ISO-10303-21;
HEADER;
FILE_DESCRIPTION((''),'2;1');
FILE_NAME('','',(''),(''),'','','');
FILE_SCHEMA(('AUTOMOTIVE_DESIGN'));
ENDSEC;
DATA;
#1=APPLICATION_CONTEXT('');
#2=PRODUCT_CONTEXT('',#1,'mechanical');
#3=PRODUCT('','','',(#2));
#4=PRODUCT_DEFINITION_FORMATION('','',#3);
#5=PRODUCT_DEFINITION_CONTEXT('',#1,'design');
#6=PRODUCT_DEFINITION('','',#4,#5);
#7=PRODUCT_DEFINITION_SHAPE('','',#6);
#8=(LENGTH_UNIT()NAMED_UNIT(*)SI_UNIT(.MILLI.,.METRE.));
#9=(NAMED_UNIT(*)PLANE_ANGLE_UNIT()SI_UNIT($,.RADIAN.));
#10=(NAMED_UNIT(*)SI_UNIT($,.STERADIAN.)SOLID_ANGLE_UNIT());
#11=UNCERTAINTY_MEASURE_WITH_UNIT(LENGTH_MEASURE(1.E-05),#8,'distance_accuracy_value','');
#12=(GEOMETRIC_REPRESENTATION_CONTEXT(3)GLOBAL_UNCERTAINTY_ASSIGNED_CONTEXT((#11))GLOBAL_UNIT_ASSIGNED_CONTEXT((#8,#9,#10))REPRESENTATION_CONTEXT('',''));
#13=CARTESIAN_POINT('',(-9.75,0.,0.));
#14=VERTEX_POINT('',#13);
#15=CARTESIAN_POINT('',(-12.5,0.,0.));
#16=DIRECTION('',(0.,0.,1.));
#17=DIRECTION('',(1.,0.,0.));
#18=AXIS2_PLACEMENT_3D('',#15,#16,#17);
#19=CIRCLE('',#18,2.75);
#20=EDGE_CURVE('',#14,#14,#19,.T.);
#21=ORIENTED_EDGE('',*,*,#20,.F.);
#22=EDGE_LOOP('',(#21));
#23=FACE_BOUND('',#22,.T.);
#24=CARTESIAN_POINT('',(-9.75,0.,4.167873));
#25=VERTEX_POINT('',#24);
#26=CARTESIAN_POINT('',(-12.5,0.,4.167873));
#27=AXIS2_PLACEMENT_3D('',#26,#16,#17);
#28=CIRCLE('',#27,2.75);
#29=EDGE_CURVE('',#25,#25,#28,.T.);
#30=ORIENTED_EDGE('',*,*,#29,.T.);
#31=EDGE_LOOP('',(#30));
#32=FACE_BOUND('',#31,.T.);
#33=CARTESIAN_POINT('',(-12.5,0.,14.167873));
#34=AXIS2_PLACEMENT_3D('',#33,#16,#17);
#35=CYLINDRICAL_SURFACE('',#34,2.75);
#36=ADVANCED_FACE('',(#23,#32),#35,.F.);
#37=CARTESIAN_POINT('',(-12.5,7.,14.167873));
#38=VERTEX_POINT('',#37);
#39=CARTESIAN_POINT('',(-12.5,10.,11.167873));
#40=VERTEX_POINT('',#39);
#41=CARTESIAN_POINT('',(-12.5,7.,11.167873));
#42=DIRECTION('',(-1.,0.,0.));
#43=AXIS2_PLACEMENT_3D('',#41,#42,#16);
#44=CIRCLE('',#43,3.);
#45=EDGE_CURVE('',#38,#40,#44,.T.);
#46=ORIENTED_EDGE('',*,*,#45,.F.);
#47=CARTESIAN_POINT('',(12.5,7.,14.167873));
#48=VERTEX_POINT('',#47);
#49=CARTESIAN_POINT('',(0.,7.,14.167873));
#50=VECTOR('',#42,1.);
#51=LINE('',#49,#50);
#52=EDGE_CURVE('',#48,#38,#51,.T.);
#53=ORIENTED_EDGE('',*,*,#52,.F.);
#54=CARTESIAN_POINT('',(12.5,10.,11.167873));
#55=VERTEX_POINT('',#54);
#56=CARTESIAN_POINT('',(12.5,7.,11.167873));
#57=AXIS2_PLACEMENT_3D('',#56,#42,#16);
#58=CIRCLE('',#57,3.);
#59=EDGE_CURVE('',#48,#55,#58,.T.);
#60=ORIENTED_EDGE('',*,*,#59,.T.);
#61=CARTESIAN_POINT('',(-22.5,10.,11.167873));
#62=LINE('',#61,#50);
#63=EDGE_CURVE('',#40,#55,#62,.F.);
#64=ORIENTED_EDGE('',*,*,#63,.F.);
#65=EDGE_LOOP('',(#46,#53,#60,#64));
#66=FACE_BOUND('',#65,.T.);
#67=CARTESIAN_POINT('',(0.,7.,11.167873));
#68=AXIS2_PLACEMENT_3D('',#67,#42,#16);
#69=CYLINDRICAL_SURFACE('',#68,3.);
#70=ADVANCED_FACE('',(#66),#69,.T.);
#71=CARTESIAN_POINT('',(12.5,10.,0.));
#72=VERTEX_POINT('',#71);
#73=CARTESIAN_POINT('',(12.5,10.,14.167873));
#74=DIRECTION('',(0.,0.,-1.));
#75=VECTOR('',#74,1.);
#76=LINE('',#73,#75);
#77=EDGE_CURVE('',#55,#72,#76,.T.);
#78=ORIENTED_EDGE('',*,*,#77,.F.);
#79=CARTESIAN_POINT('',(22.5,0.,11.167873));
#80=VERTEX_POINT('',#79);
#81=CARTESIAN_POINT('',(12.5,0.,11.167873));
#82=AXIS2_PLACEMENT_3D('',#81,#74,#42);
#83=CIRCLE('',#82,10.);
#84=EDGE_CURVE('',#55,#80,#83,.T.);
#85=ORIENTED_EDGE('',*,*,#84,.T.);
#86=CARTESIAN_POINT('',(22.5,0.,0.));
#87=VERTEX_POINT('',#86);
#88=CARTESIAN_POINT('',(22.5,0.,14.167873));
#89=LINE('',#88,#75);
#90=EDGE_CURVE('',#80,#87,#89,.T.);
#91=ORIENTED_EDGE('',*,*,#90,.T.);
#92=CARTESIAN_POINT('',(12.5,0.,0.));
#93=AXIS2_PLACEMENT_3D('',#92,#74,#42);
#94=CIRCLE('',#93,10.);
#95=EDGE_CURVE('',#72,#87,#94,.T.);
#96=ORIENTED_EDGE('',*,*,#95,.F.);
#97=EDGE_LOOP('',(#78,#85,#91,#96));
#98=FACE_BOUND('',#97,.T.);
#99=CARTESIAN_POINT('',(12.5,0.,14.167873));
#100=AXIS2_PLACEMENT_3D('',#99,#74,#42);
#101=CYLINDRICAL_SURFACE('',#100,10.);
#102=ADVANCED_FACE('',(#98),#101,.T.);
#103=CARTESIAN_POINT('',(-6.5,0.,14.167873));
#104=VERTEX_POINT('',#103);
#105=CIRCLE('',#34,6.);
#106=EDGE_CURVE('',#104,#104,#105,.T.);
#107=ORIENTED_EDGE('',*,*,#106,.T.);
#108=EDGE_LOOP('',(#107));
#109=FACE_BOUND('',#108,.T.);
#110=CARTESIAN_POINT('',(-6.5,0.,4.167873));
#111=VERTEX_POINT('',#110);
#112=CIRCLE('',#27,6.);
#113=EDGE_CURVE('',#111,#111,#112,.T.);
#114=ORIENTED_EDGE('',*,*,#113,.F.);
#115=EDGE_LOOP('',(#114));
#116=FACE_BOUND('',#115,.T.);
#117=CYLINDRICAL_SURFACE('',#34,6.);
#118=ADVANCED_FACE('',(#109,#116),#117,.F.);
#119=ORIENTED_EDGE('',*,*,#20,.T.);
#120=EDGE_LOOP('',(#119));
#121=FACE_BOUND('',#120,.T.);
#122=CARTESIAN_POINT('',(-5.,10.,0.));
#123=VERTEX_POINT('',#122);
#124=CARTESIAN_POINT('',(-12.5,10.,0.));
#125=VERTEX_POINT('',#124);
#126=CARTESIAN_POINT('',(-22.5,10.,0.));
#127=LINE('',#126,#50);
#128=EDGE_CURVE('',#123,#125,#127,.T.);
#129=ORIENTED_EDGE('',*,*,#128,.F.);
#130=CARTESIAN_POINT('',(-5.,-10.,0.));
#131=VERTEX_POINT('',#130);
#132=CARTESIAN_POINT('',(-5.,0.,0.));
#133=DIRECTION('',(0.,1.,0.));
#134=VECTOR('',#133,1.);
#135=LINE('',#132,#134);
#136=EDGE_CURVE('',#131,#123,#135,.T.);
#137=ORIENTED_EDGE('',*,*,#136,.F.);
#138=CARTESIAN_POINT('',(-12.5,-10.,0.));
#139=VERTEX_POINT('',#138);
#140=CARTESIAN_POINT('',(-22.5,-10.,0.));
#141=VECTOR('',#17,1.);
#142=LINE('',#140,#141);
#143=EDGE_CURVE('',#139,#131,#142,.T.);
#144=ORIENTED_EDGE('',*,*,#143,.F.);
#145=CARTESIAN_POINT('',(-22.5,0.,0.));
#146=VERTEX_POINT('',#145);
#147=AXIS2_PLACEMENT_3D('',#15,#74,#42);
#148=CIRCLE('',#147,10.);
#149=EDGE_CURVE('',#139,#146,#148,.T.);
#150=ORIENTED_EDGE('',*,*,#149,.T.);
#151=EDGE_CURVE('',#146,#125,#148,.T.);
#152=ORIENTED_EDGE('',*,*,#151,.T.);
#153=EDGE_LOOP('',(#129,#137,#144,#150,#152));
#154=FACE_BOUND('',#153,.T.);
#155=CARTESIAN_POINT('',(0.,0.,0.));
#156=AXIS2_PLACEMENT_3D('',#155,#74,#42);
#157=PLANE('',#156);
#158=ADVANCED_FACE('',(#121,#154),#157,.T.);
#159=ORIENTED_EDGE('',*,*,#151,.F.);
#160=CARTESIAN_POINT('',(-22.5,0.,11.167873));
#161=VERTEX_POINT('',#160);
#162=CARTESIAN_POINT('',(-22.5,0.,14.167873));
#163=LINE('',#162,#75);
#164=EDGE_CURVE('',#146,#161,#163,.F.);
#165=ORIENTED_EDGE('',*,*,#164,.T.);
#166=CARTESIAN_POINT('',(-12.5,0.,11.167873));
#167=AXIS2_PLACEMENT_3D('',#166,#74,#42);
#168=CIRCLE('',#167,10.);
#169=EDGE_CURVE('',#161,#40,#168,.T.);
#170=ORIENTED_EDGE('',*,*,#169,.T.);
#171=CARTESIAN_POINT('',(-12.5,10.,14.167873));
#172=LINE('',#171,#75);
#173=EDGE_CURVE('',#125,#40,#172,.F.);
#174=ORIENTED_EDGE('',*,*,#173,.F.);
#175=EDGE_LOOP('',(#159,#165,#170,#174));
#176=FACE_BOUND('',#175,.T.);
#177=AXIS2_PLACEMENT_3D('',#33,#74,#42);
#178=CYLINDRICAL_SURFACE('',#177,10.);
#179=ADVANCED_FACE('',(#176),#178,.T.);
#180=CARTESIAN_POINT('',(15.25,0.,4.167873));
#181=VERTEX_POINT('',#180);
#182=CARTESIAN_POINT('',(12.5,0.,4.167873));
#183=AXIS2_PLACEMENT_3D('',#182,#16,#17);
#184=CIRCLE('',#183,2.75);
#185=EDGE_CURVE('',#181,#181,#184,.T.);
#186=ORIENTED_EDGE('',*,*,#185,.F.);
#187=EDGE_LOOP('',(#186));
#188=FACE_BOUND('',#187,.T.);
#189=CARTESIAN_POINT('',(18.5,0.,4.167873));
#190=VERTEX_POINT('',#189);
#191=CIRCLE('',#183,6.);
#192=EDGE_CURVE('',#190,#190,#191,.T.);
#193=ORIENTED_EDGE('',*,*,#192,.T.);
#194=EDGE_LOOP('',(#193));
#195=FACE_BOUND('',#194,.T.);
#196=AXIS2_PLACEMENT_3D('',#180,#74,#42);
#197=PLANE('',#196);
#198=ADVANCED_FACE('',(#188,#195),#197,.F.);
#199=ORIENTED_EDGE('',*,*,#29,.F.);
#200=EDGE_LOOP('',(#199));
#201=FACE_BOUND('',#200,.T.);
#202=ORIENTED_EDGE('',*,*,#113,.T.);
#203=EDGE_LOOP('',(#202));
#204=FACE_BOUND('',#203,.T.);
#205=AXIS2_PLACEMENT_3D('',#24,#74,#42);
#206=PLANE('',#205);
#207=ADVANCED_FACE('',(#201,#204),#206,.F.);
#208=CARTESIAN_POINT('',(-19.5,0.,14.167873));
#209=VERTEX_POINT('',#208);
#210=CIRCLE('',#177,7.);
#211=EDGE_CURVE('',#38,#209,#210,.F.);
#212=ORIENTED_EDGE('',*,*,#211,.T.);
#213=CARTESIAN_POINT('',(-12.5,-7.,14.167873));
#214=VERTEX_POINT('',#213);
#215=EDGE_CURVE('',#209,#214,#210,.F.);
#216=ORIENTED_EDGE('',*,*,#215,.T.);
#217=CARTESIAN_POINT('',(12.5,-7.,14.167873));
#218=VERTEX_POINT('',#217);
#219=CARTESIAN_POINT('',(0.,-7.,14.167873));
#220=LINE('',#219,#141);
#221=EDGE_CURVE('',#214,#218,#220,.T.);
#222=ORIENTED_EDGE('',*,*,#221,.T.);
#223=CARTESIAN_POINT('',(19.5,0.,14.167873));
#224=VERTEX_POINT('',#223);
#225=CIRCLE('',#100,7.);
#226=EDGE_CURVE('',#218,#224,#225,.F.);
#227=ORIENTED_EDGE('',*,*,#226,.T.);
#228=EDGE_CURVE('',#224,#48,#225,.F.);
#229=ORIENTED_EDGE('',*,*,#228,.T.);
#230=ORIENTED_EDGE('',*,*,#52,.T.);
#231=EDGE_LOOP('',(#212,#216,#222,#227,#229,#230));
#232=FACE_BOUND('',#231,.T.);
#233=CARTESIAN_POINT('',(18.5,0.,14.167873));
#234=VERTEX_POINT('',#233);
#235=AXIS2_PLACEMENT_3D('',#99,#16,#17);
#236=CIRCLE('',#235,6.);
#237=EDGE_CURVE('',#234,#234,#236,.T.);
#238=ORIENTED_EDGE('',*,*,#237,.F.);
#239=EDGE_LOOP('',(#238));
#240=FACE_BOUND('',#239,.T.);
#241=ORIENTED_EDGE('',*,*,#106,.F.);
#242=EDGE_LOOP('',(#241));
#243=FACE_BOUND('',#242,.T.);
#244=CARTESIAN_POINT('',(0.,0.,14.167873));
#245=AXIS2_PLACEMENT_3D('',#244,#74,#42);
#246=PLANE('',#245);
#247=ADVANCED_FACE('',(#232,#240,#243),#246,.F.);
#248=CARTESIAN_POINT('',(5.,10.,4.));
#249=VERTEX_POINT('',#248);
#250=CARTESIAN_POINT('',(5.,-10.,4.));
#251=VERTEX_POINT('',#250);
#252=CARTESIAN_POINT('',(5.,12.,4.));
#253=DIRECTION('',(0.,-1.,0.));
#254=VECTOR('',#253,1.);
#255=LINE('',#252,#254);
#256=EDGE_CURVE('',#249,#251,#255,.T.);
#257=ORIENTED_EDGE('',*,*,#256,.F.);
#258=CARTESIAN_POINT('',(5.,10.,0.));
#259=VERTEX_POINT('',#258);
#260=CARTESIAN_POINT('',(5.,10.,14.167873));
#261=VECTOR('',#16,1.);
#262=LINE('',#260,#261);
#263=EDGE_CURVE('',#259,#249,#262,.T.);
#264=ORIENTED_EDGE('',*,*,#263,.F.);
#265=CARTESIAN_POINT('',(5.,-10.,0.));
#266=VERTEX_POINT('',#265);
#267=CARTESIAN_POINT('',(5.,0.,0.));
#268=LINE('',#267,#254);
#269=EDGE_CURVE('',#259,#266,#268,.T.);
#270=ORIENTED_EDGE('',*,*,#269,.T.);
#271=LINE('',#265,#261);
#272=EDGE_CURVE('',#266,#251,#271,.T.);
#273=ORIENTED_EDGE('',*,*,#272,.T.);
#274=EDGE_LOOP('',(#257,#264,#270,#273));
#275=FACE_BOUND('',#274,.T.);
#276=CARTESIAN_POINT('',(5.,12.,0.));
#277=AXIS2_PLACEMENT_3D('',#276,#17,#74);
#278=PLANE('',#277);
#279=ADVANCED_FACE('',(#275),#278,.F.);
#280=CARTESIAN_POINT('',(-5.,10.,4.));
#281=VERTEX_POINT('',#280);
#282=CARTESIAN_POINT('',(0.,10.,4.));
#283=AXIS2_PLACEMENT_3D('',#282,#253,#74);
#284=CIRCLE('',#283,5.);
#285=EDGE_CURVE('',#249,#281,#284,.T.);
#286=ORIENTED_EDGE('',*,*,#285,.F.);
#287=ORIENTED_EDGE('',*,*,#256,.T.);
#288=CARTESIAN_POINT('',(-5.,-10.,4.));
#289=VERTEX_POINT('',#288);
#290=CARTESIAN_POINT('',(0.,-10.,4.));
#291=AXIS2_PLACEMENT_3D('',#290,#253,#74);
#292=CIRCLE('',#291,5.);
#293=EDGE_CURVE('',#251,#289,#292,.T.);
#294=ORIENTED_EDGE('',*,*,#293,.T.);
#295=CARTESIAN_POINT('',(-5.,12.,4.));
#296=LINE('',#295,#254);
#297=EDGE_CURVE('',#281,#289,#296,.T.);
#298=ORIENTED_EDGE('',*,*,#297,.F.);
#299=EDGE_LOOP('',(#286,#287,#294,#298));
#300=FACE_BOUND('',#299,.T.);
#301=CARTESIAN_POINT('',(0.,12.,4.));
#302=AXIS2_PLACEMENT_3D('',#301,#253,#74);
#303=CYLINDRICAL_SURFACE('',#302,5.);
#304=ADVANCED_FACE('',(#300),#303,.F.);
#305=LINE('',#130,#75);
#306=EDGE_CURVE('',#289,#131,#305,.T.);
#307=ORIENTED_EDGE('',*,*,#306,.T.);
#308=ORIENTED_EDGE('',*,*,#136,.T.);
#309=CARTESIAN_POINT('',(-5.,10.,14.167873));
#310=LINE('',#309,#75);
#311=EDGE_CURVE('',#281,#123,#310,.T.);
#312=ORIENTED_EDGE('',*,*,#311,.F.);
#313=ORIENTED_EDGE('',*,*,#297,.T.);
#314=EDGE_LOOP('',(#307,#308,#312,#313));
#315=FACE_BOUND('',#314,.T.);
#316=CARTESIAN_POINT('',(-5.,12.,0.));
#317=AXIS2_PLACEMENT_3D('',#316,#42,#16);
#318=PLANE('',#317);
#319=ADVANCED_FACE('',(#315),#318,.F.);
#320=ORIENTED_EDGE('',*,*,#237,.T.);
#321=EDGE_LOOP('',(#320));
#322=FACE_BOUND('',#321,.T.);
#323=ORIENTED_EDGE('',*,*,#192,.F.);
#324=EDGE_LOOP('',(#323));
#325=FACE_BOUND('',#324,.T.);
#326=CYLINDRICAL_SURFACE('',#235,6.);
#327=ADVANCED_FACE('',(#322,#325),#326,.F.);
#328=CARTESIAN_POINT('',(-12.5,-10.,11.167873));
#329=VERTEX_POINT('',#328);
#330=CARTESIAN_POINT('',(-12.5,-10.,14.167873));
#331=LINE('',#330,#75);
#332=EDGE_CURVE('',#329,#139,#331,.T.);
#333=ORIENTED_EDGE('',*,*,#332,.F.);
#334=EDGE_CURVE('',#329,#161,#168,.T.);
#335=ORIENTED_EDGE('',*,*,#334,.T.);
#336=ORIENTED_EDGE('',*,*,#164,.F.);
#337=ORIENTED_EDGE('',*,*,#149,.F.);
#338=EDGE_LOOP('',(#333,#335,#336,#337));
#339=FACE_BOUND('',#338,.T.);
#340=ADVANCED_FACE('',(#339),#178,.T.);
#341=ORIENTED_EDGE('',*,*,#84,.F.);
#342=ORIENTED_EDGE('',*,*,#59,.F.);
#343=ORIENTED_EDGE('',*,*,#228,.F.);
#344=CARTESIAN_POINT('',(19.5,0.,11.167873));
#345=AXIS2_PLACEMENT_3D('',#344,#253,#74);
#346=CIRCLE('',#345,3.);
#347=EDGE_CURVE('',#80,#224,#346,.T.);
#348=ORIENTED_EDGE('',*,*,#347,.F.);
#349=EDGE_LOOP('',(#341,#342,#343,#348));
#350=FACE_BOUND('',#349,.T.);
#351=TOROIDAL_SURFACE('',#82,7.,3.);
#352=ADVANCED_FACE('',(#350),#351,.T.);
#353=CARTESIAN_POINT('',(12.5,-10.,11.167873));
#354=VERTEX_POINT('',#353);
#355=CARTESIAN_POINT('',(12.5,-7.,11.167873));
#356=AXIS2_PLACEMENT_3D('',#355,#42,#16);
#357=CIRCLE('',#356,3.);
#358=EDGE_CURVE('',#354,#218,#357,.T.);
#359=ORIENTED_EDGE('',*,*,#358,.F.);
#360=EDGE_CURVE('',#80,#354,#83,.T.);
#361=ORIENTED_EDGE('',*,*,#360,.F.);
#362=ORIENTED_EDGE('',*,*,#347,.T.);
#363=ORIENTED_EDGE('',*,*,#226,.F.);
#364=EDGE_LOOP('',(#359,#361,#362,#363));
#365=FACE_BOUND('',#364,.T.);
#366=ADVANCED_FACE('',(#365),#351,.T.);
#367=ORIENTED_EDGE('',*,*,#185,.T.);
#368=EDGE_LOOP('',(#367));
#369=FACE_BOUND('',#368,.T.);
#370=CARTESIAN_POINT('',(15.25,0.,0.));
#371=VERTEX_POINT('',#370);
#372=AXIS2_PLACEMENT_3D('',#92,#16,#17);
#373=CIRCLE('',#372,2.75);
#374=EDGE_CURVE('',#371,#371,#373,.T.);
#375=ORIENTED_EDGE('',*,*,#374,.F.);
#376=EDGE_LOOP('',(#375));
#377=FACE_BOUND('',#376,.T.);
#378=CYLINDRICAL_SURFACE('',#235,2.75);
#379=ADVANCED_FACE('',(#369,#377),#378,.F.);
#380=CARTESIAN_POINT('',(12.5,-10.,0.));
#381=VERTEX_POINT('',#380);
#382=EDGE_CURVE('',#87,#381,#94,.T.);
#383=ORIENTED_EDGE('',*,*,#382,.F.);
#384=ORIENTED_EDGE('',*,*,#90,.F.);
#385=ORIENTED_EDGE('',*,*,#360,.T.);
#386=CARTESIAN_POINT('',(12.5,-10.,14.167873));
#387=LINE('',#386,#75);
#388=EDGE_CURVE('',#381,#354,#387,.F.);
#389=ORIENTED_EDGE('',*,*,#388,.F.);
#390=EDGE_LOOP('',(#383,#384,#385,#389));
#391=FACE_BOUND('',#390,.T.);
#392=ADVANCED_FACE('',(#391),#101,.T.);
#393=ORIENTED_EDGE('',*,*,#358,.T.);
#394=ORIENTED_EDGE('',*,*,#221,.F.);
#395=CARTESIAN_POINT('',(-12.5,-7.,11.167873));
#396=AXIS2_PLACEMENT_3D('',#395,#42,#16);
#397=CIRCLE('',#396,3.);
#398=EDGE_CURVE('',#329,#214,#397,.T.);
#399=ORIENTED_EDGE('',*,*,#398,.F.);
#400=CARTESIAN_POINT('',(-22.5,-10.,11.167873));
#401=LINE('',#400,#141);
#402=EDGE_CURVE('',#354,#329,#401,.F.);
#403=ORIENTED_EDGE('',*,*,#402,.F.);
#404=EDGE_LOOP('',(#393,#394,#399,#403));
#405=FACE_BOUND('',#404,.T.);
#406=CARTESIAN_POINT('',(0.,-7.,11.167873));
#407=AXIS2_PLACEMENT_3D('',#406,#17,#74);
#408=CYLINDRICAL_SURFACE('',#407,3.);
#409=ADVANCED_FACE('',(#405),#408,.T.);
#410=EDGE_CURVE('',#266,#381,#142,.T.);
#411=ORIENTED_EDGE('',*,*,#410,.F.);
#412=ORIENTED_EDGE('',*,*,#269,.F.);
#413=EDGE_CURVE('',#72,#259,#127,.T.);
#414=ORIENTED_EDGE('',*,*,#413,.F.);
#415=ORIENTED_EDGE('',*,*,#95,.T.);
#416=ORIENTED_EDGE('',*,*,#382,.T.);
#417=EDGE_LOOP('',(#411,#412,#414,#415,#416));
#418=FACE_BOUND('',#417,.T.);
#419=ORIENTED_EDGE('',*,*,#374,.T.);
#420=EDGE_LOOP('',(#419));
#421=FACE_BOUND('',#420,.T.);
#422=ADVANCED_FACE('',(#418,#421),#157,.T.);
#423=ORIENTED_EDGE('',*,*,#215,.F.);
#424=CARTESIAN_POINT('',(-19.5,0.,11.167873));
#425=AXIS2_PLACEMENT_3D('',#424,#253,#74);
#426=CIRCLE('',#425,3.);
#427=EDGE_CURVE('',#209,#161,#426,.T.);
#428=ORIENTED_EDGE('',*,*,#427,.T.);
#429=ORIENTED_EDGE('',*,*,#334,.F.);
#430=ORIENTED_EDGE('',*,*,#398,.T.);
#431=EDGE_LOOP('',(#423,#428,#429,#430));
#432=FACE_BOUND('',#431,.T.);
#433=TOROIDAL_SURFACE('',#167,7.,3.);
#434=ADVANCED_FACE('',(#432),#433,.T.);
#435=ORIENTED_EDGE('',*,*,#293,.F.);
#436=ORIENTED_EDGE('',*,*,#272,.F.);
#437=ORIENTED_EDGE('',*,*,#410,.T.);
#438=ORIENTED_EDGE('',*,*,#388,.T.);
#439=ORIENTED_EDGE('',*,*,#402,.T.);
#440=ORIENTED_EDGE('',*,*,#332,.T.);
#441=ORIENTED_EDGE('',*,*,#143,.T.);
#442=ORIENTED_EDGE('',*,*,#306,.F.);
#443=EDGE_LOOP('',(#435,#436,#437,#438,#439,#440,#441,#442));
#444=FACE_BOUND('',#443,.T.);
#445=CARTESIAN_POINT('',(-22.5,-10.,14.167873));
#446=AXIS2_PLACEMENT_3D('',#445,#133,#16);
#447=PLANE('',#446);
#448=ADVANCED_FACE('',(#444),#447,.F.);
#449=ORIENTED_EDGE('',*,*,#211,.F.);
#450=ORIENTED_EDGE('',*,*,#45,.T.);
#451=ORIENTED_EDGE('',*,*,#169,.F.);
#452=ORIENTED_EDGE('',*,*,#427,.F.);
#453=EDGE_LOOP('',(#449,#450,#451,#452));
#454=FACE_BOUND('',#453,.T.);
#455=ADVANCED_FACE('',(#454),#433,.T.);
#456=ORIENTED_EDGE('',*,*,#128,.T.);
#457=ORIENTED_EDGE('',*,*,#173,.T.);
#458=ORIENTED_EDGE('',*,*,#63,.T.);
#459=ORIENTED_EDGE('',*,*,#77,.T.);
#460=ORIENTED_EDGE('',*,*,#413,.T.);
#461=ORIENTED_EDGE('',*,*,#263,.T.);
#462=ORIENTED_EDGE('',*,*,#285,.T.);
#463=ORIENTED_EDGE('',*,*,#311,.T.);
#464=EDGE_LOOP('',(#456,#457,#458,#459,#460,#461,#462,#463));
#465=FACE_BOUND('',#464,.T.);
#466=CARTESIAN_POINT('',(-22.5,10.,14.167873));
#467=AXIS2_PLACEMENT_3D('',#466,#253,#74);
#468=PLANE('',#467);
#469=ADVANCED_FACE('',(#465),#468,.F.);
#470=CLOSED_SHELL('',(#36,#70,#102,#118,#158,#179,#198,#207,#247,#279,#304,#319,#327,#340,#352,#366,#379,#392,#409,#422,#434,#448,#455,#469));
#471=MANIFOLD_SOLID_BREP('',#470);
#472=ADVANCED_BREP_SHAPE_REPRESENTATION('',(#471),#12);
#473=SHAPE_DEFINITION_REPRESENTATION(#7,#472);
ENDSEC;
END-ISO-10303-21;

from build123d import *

# Parameters (mm, degrees)
SKETCH2_W                               = 45
SKETCH2_H                               = 20
BOSS_EXTRUDE2_DEPTH                     = 14.16787265
FILLET1_R                               = 10
CUT_EXTRUDE1_DEPTH                      = 22
CBORE_FOR_M5_HEX_HEAD_BOLT1_D           = 5.5
CBORE_FOR_M5_HEX_HEAD_BOLT1_CBORE_D     = 12
CBORE_FOR_M5_HEX_HEAD_BOLT1_CBORE_DEPTH = 10
FILLET2_R                               = 3


with BuildPart() as part:
    # Sketch2 → Boss-Extrude2 (new body)
    with BuildSketch(Plane.XY):
        Rectangle(SKETCH2_W, SKETCH2_H)
    extrude(amount=BOSS_EXTRUDE2_DEPTH)

    # Fillet1
    fillet1_edges = [part.edges().sort_by_distance(p)[0] for p in [
        (22.5, 10, 7.083936325),
        (22.5, -10, 7.083936325),
        (-22.5, 10, 7.083936325),
        (-22.5, -10, 7.083936325),
    ]]
    fillet(fillet1_edges, radius=FILLET1_R - 0.0001)  # a hair under: the kernel refuses the full size

    # Sketch3 → Cut-Extrude1 (cut)
    with BuildSketch(Plane.XZ.offset(10)):
        with BuildLine():
            Line((-5, 0), (-5, 4))
            ThreePointArc((-5, 4), (0, 9), (5, 4))
            Line((5, 4), (5, 0))
            ThreePointArc((5, 0), (0, -5), (-5, 0))
        make_face()
    extrude(amount=-CUT_EXTRUDE1_DEPTH, mode=Mode.SUBTRACT)

    # CBORE for M5 Hex Head Bolt1 (through all)
    with Locations(Plane.XY.offset(14.16787265)):
        with Locations((-12.5, 0), (12.5, 0)):
            CounterBoreHole(CBORE_FOR_M5_HEX_HEAD_BOLT1_D / 2, CBORE_FOR_M5_HEX_HEAD_BOLT1_CBORE_D / 2, CBORE_FOR_M5_HEX_HEAD_BOLT1_CBORE_DEPTH)

    # Fillet2
    fillet2_edges = [part.edges().sort_by_distance(p)[0] for p in [
        (0, 10, 14.16787265),
        (0, -10, 14.16787265),
        (-19.571097101, -7.071097101, 14.16787265),
        (-19.571097101, 7.071097101, 14.16787265),
        (19.571097101, -7.071097101, 14.16787265),
        (19.571097101, 7.071097101, 14.16787265),
    ]]
    fillet(fillet2_edges, radius=FILLET2_R)


solid = part.part
